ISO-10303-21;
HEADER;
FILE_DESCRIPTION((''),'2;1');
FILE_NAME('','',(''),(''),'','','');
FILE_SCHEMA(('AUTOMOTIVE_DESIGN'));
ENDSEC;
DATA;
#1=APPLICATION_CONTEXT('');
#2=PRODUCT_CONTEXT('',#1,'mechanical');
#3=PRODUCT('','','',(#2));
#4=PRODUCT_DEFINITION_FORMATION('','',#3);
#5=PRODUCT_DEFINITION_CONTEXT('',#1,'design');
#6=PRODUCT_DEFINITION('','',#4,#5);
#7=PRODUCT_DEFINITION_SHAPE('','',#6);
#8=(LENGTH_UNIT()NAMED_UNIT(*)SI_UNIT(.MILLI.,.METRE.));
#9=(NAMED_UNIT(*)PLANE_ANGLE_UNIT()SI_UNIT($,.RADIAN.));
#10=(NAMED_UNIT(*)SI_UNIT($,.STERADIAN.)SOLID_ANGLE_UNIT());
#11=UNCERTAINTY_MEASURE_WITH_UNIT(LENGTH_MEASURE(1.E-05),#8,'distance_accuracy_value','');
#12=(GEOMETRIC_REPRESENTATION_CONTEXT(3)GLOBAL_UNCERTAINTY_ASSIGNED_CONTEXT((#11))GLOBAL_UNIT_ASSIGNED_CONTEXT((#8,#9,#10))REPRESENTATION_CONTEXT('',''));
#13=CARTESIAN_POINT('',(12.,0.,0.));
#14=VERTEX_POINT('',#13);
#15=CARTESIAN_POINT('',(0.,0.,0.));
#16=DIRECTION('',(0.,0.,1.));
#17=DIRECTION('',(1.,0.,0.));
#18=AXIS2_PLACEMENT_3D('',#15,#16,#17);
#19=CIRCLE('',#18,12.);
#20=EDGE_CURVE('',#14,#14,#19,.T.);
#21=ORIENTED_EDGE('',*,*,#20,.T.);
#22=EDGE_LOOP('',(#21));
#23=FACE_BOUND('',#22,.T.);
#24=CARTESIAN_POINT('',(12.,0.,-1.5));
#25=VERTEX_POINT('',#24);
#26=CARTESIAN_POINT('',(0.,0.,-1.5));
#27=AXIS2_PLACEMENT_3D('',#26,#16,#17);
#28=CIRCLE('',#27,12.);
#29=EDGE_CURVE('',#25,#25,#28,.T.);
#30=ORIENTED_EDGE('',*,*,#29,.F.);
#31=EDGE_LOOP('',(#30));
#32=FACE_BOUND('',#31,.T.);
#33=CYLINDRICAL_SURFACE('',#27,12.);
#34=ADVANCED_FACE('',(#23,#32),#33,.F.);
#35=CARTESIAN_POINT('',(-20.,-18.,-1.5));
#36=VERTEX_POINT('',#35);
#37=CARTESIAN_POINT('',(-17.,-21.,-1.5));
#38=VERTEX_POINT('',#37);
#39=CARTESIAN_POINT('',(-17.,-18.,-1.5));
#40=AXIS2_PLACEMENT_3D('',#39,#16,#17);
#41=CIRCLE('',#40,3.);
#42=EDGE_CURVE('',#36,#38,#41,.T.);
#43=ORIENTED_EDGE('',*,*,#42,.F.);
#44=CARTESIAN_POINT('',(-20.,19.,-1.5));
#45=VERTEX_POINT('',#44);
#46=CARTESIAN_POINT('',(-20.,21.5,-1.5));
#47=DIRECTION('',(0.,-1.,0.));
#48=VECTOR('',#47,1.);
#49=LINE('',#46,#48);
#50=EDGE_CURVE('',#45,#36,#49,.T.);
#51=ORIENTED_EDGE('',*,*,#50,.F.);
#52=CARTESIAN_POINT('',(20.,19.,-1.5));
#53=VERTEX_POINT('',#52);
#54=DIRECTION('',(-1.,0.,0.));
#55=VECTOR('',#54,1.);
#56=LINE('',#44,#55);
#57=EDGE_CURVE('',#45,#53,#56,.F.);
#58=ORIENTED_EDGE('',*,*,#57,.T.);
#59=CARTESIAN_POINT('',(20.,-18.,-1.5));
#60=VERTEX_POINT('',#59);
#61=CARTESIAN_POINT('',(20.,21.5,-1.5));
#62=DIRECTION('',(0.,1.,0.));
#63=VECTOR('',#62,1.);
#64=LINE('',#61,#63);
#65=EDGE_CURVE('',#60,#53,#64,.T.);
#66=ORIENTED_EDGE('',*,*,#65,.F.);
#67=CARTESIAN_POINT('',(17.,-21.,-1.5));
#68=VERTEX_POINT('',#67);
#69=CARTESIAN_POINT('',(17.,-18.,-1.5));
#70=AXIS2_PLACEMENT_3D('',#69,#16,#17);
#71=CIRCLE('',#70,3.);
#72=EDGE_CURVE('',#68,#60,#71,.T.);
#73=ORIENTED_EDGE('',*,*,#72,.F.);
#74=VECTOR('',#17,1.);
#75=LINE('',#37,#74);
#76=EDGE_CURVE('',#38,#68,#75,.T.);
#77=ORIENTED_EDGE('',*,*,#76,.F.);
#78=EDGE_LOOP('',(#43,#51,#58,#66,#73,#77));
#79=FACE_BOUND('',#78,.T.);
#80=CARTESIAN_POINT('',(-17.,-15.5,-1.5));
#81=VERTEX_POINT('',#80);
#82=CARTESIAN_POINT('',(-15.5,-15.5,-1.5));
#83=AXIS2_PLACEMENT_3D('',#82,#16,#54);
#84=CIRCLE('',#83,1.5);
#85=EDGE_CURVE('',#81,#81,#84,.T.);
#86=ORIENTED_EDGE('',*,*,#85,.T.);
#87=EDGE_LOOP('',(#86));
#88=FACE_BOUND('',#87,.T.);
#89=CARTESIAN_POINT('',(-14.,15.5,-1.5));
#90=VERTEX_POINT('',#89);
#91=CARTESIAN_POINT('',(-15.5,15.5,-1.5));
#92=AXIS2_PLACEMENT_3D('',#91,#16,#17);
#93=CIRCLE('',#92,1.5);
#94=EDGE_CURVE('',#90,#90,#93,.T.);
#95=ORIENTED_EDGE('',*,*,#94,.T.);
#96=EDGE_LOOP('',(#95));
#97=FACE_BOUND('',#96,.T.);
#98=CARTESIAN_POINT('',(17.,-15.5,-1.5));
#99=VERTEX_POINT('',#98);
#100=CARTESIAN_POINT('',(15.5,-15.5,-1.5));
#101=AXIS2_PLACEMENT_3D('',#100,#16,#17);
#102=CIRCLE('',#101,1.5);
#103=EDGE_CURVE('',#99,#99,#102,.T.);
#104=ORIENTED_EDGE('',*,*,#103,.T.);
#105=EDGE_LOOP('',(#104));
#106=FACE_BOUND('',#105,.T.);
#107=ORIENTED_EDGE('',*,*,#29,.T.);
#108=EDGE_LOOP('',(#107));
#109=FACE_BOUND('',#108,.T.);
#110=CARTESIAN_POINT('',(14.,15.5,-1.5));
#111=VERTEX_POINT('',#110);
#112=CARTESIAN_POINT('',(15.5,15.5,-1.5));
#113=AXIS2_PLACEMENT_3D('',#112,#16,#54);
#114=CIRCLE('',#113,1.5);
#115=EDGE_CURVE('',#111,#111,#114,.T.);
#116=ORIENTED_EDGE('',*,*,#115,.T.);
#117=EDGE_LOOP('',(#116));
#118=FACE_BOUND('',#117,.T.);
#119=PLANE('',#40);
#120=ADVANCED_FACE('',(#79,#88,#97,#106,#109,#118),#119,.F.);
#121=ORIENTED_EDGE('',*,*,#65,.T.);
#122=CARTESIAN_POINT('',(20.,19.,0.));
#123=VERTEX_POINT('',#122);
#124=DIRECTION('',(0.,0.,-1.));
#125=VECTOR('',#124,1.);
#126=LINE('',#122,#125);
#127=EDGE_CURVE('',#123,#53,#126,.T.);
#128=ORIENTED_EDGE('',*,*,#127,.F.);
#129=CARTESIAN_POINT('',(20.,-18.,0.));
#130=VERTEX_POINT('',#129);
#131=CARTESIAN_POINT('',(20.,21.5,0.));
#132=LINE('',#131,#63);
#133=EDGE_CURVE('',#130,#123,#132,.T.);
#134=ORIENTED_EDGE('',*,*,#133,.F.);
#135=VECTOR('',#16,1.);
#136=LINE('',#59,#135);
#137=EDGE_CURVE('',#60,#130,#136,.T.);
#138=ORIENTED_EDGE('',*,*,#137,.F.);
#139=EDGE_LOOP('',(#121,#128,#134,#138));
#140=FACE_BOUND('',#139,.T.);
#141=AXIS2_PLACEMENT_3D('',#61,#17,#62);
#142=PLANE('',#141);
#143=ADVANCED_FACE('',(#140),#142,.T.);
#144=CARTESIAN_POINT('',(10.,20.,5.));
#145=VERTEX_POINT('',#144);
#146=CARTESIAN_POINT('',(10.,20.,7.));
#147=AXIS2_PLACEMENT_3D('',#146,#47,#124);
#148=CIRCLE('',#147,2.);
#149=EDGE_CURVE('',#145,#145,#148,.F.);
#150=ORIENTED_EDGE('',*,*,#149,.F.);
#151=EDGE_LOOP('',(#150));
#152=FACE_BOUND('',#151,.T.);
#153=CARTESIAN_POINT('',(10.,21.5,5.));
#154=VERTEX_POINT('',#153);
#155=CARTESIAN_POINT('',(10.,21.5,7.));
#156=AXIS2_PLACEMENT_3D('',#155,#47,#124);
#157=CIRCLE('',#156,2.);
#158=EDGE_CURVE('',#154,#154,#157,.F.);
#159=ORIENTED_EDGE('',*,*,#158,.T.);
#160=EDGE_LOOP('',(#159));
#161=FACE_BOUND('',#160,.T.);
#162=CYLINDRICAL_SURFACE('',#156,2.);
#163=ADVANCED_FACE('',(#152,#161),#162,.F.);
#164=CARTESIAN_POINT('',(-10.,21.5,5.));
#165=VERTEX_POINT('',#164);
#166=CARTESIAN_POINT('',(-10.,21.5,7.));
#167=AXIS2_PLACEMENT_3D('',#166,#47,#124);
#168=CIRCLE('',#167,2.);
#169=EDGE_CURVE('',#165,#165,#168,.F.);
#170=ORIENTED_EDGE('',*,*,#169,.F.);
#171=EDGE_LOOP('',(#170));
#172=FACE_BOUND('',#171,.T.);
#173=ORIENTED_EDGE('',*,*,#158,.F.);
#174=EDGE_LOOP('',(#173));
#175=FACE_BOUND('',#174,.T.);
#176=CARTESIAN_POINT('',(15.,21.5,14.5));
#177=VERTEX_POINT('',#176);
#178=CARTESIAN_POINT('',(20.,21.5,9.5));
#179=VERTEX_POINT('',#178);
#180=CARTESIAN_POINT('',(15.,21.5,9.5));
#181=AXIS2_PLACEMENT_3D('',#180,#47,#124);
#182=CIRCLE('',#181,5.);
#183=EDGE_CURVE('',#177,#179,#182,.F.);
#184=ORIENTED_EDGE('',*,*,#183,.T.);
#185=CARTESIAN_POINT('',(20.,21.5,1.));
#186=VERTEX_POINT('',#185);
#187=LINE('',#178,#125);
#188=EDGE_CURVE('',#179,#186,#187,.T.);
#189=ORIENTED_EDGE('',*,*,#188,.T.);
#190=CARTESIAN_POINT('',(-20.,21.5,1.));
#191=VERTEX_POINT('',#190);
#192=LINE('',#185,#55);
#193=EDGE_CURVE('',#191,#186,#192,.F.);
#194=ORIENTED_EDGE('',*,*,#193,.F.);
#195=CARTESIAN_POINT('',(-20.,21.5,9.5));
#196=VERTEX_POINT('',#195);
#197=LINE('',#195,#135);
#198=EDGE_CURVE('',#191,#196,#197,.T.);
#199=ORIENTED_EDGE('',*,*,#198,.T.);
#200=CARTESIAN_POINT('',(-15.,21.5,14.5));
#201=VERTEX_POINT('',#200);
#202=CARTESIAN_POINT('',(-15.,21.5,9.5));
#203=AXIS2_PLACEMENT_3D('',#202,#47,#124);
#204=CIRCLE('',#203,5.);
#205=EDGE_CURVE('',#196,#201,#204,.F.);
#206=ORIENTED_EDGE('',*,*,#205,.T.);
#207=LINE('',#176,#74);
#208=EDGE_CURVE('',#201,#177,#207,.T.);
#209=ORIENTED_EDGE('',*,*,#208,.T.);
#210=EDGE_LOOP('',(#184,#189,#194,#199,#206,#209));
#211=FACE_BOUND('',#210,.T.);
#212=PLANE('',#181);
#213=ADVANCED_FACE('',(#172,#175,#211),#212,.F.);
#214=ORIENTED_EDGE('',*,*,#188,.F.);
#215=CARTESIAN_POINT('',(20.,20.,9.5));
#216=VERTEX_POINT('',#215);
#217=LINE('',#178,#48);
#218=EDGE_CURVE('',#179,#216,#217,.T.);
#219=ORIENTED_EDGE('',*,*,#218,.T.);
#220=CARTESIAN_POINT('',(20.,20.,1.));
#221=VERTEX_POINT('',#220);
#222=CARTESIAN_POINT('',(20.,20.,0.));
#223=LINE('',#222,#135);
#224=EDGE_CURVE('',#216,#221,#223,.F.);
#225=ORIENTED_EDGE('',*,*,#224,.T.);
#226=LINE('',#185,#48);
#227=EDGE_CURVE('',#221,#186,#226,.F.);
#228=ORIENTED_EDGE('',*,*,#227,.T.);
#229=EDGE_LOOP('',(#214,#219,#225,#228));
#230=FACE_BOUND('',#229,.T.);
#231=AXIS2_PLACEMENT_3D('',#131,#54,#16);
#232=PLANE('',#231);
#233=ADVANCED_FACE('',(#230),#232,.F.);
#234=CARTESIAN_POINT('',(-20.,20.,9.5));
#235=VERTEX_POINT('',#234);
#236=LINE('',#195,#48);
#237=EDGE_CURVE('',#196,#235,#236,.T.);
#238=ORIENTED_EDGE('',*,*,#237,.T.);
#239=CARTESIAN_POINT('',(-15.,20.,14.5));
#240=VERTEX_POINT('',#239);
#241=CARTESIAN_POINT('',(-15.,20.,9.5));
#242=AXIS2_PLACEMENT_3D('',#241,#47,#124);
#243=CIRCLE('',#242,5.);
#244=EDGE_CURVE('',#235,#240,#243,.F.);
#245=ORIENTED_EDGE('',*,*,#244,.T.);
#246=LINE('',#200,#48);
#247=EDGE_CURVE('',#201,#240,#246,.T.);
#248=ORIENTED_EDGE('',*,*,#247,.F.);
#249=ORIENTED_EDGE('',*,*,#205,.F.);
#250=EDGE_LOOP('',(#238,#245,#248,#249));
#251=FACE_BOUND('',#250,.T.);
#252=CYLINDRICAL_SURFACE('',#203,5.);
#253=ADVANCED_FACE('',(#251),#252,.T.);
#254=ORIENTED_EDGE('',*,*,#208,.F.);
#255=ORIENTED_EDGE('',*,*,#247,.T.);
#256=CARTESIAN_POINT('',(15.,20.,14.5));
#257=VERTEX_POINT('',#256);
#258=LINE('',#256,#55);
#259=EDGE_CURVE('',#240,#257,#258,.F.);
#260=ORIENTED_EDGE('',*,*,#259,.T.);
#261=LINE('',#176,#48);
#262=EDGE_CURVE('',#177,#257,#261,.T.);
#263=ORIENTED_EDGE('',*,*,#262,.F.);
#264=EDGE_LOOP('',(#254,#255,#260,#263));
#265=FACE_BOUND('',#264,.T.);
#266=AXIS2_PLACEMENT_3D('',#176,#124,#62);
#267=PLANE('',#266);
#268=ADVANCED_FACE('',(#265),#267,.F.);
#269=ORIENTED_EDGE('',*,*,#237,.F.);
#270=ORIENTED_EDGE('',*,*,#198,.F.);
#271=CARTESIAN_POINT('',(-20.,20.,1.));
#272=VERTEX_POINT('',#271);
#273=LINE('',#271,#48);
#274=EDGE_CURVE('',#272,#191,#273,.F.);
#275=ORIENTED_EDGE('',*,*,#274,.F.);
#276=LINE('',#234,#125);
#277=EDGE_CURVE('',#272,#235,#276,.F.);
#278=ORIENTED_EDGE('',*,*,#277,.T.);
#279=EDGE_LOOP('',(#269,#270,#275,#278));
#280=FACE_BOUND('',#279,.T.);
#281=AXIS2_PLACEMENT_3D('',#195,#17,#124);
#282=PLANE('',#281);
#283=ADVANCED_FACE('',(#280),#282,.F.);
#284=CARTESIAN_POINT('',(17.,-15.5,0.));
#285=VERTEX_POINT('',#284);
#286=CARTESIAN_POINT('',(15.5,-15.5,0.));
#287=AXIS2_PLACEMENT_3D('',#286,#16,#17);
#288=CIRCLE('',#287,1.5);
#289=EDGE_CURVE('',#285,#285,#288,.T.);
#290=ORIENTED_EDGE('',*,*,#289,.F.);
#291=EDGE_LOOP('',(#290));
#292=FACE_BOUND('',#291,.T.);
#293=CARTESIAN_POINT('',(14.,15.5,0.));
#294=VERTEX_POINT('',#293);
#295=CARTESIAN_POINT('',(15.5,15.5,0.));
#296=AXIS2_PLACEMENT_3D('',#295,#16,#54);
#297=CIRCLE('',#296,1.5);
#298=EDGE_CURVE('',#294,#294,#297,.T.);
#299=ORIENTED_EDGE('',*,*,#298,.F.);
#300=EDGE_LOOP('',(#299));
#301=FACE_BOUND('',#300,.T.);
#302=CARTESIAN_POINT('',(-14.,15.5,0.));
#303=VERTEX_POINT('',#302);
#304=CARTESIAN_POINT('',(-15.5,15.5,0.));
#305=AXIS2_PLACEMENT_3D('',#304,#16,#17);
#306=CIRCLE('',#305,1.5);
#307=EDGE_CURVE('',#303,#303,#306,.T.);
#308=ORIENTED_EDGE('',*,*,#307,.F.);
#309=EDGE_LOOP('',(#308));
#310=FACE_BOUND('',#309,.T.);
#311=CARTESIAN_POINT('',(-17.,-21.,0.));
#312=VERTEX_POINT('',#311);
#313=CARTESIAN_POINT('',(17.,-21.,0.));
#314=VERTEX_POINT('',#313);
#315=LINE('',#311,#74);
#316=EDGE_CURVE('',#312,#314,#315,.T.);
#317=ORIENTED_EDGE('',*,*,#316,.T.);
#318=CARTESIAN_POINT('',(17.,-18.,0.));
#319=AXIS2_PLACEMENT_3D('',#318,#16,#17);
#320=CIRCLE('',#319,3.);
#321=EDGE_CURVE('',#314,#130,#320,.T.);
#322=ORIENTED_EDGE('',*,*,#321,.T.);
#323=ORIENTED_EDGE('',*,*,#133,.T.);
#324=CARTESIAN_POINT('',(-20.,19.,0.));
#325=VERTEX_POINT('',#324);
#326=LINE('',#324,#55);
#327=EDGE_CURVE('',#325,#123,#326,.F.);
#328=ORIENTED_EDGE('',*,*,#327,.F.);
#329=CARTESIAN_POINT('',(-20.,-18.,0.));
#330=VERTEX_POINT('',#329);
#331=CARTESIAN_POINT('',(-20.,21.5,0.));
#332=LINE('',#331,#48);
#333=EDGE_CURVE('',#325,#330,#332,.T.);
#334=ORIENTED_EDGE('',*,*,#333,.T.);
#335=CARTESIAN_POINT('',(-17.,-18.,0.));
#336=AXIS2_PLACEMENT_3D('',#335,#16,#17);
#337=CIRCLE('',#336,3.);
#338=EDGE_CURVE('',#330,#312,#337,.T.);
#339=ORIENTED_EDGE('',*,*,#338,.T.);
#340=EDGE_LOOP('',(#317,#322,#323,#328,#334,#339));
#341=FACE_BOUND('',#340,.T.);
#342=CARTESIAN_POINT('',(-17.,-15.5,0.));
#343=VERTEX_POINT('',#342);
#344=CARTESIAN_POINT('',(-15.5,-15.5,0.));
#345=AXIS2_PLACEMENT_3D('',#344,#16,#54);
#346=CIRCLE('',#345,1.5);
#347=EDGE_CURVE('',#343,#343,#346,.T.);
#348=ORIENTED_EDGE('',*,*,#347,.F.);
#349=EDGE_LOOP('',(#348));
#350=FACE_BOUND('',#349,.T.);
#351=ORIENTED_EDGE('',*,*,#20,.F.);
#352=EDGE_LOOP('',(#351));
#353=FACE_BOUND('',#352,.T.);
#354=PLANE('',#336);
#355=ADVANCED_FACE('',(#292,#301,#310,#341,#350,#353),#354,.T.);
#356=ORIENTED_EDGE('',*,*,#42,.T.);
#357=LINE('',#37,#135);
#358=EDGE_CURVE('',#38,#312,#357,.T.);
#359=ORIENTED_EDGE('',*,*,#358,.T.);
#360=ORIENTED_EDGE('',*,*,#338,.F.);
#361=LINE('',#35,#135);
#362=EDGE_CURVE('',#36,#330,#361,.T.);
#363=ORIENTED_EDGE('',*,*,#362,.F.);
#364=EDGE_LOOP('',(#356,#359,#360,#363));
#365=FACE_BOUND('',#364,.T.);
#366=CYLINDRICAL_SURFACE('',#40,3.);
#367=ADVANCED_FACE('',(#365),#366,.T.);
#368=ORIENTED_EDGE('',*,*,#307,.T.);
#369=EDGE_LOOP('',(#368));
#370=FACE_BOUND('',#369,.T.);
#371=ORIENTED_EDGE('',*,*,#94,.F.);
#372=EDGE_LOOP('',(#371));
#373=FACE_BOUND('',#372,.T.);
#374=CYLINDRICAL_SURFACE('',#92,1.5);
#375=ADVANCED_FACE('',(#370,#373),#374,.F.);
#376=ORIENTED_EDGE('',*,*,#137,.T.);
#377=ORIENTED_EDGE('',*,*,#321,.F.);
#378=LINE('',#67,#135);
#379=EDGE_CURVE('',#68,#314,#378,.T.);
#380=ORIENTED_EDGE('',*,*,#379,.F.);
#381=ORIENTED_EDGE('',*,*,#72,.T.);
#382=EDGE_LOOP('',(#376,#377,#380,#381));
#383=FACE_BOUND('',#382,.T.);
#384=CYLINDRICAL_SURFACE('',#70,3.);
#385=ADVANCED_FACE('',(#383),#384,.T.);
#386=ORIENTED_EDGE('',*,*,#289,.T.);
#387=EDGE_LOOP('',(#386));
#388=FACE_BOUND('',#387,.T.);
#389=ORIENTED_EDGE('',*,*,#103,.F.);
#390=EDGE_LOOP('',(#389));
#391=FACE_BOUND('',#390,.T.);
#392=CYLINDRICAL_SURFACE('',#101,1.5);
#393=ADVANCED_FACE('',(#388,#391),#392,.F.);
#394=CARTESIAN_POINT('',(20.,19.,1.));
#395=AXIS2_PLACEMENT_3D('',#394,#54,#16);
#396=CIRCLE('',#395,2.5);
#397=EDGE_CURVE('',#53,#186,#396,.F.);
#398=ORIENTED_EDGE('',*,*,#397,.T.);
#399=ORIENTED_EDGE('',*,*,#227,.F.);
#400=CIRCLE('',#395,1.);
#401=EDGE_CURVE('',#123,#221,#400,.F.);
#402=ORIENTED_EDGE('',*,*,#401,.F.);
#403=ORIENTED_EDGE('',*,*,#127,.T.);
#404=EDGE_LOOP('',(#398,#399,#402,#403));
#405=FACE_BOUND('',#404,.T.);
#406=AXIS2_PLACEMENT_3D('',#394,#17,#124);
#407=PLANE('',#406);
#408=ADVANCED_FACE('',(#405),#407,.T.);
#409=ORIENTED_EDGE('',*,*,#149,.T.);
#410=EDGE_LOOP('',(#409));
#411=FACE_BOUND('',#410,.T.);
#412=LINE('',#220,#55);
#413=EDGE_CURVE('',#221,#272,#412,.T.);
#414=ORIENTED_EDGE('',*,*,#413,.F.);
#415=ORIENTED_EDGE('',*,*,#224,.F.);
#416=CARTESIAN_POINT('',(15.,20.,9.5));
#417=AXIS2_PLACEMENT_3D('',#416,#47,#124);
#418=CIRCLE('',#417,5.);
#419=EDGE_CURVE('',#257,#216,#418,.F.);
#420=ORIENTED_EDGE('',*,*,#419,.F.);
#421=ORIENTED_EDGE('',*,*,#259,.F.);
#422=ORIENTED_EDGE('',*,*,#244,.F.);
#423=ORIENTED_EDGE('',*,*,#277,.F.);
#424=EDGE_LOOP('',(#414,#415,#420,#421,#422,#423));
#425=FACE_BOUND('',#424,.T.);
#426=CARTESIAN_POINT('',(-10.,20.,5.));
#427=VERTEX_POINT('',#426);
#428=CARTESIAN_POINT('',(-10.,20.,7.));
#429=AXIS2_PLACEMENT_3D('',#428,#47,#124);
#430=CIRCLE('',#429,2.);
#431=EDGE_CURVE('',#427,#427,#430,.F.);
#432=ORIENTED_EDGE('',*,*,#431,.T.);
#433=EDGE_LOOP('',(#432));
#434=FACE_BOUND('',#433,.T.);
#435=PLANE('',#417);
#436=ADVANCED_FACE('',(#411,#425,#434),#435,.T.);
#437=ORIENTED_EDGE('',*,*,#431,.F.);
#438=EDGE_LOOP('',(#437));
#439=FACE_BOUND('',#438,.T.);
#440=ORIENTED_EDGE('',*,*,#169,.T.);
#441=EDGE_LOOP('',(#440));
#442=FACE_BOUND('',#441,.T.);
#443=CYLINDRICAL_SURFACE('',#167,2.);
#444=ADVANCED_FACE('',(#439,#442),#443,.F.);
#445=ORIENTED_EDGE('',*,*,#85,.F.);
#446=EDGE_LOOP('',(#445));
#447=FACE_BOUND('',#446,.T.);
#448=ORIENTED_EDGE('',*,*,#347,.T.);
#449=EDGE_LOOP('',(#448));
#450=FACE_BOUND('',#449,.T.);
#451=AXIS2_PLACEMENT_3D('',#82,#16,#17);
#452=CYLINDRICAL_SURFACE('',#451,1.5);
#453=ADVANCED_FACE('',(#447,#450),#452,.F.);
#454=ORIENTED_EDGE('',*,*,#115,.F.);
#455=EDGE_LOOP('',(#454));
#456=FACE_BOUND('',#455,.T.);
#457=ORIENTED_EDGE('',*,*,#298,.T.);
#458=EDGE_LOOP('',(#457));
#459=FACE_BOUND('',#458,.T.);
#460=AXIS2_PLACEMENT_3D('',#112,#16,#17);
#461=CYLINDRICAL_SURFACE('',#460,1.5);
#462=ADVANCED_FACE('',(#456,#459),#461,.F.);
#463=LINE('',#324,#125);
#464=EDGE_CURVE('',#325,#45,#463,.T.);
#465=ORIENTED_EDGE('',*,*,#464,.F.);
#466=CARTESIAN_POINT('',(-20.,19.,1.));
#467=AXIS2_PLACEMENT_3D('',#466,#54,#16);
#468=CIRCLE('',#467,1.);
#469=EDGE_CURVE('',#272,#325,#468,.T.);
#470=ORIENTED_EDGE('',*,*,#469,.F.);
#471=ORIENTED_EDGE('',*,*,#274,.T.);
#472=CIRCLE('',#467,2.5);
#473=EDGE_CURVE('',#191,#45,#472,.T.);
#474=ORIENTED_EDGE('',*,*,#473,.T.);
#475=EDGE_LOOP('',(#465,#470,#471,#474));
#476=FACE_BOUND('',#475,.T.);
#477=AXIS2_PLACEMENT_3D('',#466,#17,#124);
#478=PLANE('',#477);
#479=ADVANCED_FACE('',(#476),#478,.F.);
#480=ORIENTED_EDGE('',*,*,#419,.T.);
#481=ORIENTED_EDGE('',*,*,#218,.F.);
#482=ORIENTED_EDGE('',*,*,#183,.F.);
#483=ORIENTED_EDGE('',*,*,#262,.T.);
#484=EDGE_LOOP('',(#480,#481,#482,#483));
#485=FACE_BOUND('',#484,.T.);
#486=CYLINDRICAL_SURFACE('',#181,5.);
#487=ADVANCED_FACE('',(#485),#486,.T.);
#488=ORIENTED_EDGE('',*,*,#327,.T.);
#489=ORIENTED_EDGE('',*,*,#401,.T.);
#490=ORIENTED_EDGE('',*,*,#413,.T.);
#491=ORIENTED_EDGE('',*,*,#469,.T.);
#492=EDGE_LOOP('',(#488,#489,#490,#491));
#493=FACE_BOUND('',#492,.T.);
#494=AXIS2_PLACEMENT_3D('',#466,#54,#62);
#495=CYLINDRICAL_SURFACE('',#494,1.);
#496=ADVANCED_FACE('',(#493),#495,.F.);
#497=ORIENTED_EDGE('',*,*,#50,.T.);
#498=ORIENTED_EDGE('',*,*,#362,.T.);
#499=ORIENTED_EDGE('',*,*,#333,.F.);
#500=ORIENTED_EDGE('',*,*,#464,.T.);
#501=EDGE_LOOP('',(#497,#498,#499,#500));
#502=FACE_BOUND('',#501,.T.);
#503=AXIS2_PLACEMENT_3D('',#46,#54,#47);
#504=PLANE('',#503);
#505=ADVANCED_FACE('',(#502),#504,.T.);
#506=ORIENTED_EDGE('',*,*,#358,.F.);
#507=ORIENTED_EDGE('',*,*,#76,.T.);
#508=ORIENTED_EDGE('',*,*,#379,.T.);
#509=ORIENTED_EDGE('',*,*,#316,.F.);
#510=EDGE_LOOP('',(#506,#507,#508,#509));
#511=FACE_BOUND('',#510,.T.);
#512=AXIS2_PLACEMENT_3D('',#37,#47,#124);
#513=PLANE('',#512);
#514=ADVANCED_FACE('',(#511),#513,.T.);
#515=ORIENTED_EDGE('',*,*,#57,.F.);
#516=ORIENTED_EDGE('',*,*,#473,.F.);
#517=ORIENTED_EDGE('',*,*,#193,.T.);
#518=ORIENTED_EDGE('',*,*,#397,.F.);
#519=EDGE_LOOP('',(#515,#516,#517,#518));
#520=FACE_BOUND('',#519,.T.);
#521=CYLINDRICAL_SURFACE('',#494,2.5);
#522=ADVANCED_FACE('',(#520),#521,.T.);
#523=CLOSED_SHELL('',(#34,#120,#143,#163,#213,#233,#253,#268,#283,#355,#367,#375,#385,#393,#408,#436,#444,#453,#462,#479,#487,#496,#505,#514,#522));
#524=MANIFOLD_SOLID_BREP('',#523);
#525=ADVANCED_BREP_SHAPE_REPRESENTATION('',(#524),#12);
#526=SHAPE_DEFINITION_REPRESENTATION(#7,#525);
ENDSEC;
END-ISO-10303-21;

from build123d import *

# Parameters (mm, degrees)
SKETCH_1_R                       = 1.5
SKETCH_1_R_2                     = 12
SM_BASE_FLANGE_1_DEPTH           = 1.5
SM_EDGE_FLANGE_1_STRIP_W         = 8
SM_EDGE_FLANGE_1_STRIP_H         = 1.5
SM_EDGE_FLANGE_1_STRIP_CUT_DEPTH = 40
SM_EDGE_FLANGE_1_DEPTH           = 40
SM_EDGE_FLANGE_1_PROFILE_R       = 2
SM_EDGE_FLANGE_1_FLAT_DEPTH      = 1.5


# Sheet-metal steps are written as plain solids
with BuildPart() as part:
    # Sketch 1 → 基体-法兰1 (new body)
    with BuildSketch(Plane.XY):
        with BuildLine():
            Line((-20, 21.5), (20, 21.5))
            Line((20, 21.5), (20, -18))
            ThreePointArc((20, -18), (19.121320344, -20.121320344), (17, -21))
            Line((17, -21), (-17, -21))
            ThreePointArc((-17, -21), (-19.121320344, -20.121320344), (-20, -18))
            Line((-20, -18), (-20, 21.5))
        make_face()
        with Locations((-15.5, 15.5)):
            Circle(SKETCH_1_R, mode=Mode.SUBTRACT)
        with Locations(Location((15.5, 15.5, 0), (0, 0, 180))):
            Circle(SKETCH_1_R, mode=Mode.SUBTRACT)
        with Locations((15.5, -15.5)):
            Circle(SKETCH_1_R, mode=Mode.SUBTRACT)
        with Locations(Location((-15.5, -15.5, 0), (0, 0, 180))):
            Circle(SKETCH_1_R, mode=Mode.SUBTRACT)
        Circle(SKETCH_1_R_2, mode=Mode.SUBTRACT)
    extrude(amount=-SM_BASE_FLANGE_1_DEPTH)

    # 边线-法兰1 strip (across the edge) → 边线-法兰1 strip cut (cut)
    with BuildSketch(Plane(origin=(20, 21.5, 0), x_dir=(0, -1, 0), z_dir=(-1, 0, 0))):
        with Locations((-1.5, -0.75)):
            Rectangle(SM_EDGE_FLANGE_1_STRIP_W, SM_EDGE_FLANGE_1_STRIP_H)
    extrude(amount=SM_EDGE_FLANGE_1_STRIP_CUT_DEPTH, mode=Mode.SUBTRACT)

    # 边线-法兰1 bend section (across the edge) → 边线-法兰1 (add)
    with BuildSketch(Plane(origin=(20, 21.5, 0), x_dir=(0, -1, 0), z_dir=(-1, 0, 0))):
        with BuildLine():
            Line((0, 1), (1.5, 1))
            ThreePointArc((1.5, 1), (1.792893219, 0.292893219), (2.5, 0))
            Line((2.5, 0), (2.5, -1.5))
            ThreePointArc((2.5, -1.5), (0.732233047, -0.767766953), (0, 1))
        make_face()
    extrude(amount=SM_EDGE_FLANGE_1_DEPTH)

    # 边线-法兰1 profile (on flange) → 边线-法兰1 flat (add)
    with BuildSketch(Plane(origin=(0, 21.5, 0), x_dir=(-1, 0, 0), z_dir=(0, 1, 0))):
        with BuildLine():
            Line((15, 14.5), (-15, 14.5))
            ThreePointArc((-15, 14.5), (-18.535533906, 13.035533906), (-20, 9.5))
            Line((-20, 9.5), (-20, 1))
            Line((-20, 1), (20, 1))
            Line((20, 1), (20, 9.5))
            ThreePointArc((20, 9.5), (18.535533906, 13.035533906), (15, 14.5))
        make_face()
        with Locations((-10, 7)):
            Circle(SM_EDGE_FLANGE_1_PROFILE_R, mode=Mode.SUBTRACT)
        with Locations((10, 7)):
            Circle(SM_EDGE_FLANGE_1_PROFILE_R, mode=Mode.SUBTRACT)
    extrude(amount=-SM_EDGE_FLANGE_1_FLAT_DEPTH)


solid = part.part
